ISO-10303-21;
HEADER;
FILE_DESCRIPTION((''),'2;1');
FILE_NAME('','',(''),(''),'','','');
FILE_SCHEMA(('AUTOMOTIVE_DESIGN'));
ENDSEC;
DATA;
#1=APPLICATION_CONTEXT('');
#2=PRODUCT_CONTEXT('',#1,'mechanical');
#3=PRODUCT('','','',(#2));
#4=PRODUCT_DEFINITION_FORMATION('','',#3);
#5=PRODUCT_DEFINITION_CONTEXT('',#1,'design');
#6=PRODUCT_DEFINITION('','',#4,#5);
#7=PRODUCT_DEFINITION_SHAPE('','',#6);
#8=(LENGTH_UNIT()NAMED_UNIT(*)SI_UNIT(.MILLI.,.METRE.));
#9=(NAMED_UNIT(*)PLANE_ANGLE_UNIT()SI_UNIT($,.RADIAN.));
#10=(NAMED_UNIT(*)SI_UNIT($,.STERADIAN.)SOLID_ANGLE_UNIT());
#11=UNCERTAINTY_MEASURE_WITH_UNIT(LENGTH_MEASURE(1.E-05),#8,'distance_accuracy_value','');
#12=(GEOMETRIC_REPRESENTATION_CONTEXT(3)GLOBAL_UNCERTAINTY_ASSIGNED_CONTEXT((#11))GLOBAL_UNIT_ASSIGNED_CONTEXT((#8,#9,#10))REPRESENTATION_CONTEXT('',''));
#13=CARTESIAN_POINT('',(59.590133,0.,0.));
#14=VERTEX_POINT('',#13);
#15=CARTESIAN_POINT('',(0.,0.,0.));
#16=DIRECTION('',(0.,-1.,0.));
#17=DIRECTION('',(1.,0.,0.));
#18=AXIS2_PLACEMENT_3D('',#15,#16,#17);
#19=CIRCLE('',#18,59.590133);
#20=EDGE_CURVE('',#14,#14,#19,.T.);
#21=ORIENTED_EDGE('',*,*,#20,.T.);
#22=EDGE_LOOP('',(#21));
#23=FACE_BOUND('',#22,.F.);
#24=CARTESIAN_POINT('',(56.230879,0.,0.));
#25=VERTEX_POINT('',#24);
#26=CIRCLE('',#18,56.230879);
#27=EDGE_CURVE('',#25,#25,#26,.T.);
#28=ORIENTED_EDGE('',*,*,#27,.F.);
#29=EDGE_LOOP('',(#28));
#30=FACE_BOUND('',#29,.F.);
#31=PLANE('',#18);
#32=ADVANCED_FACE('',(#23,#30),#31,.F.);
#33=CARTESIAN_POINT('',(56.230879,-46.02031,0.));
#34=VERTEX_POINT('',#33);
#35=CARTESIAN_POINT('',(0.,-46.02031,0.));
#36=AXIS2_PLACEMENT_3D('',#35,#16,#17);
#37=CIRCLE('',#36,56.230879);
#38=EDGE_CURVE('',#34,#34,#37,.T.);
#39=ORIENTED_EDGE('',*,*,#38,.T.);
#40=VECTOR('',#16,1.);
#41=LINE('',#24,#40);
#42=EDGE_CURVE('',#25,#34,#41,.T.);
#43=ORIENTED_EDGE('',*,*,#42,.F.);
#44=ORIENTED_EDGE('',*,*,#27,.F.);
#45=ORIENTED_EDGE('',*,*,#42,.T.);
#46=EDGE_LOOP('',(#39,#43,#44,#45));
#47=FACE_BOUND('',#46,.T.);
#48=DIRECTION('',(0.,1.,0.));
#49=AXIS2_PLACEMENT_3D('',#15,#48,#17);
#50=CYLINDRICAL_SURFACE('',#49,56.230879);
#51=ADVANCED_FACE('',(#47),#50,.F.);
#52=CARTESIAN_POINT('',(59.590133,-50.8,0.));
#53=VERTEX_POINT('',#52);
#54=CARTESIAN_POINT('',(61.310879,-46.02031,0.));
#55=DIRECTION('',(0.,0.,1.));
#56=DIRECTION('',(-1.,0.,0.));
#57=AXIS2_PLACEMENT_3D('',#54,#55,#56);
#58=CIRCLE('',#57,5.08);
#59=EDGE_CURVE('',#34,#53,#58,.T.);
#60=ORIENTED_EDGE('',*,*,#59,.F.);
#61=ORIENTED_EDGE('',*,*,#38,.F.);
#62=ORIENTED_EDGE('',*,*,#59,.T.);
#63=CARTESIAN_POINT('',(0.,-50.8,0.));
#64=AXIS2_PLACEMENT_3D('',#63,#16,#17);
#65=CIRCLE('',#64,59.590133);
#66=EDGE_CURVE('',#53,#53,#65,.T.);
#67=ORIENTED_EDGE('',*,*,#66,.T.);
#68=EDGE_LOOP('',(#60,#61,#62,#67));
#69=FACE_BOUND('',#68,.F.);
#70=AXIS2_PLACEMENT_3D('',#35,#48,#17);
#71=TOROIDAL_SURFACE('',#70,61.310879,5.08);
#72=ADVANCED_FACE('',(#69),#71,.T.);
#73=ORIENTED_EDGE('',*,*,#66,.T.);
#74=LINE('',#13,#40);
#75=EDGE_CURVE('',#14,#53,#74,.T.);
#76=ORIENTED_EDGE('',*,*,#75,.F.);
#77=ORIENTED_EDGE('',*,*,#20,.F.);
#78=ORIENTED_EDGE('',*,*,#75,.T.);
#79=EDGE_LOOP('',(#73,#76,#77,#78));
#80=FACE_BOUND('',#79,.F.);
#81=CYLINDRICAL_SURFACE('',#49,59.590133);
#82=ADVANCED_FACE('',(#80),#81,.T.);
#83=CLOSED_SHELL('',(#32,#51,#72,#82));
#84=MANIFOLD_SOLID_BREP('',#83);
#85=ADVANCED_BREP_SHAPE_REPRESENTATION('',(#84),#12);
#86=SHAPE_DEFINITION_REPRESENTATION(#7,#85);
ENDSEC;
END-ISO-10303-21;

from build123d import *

# Parameters (mm, degrees)
F0_R     = 59.590133007
F0_R_2   = 56.2308790167
F1_DEPTH = 50.8


# Not quite as in the source:
# - a fillet or chamfer that OpenCascade refuses, or shapes differently, is made with other operations: its cross-section is extruded or revolved along the edge and cut away or added


with BuildPart() as f1:
    # F0 (on Front) → F1 (new body)
    with BuildSketch(Plane.XZ):
        Circle(F0_R)
        Circle(F0_R_2, mode=Mode.SUBTRACT)
    extrude(amount=F1_DEPTH)

    # F2: fillet of radius 5.08 on 1 edges, made by hand

    # F2_s1 → F2_t2 (revolve, cut)
    with BuildSketch(Plane.XY):
        with BuildLine():
            ThreePointArc((56.2308790167, -46.0203103479), (57.154691477, -48.9413555608), (59.590133007, -50.8))
            Line((59.590133007, -50.8), (56.2308790167, -50.8))
            Line((56.2308790167, -50.8), (56.2308790167, -46.0203103479))
        make_face()
    revolve(axis=Axis((0, -50.8, 0), (0, -1, 0)), mode=Mode.SUBTRACT)


solid = f1.part
